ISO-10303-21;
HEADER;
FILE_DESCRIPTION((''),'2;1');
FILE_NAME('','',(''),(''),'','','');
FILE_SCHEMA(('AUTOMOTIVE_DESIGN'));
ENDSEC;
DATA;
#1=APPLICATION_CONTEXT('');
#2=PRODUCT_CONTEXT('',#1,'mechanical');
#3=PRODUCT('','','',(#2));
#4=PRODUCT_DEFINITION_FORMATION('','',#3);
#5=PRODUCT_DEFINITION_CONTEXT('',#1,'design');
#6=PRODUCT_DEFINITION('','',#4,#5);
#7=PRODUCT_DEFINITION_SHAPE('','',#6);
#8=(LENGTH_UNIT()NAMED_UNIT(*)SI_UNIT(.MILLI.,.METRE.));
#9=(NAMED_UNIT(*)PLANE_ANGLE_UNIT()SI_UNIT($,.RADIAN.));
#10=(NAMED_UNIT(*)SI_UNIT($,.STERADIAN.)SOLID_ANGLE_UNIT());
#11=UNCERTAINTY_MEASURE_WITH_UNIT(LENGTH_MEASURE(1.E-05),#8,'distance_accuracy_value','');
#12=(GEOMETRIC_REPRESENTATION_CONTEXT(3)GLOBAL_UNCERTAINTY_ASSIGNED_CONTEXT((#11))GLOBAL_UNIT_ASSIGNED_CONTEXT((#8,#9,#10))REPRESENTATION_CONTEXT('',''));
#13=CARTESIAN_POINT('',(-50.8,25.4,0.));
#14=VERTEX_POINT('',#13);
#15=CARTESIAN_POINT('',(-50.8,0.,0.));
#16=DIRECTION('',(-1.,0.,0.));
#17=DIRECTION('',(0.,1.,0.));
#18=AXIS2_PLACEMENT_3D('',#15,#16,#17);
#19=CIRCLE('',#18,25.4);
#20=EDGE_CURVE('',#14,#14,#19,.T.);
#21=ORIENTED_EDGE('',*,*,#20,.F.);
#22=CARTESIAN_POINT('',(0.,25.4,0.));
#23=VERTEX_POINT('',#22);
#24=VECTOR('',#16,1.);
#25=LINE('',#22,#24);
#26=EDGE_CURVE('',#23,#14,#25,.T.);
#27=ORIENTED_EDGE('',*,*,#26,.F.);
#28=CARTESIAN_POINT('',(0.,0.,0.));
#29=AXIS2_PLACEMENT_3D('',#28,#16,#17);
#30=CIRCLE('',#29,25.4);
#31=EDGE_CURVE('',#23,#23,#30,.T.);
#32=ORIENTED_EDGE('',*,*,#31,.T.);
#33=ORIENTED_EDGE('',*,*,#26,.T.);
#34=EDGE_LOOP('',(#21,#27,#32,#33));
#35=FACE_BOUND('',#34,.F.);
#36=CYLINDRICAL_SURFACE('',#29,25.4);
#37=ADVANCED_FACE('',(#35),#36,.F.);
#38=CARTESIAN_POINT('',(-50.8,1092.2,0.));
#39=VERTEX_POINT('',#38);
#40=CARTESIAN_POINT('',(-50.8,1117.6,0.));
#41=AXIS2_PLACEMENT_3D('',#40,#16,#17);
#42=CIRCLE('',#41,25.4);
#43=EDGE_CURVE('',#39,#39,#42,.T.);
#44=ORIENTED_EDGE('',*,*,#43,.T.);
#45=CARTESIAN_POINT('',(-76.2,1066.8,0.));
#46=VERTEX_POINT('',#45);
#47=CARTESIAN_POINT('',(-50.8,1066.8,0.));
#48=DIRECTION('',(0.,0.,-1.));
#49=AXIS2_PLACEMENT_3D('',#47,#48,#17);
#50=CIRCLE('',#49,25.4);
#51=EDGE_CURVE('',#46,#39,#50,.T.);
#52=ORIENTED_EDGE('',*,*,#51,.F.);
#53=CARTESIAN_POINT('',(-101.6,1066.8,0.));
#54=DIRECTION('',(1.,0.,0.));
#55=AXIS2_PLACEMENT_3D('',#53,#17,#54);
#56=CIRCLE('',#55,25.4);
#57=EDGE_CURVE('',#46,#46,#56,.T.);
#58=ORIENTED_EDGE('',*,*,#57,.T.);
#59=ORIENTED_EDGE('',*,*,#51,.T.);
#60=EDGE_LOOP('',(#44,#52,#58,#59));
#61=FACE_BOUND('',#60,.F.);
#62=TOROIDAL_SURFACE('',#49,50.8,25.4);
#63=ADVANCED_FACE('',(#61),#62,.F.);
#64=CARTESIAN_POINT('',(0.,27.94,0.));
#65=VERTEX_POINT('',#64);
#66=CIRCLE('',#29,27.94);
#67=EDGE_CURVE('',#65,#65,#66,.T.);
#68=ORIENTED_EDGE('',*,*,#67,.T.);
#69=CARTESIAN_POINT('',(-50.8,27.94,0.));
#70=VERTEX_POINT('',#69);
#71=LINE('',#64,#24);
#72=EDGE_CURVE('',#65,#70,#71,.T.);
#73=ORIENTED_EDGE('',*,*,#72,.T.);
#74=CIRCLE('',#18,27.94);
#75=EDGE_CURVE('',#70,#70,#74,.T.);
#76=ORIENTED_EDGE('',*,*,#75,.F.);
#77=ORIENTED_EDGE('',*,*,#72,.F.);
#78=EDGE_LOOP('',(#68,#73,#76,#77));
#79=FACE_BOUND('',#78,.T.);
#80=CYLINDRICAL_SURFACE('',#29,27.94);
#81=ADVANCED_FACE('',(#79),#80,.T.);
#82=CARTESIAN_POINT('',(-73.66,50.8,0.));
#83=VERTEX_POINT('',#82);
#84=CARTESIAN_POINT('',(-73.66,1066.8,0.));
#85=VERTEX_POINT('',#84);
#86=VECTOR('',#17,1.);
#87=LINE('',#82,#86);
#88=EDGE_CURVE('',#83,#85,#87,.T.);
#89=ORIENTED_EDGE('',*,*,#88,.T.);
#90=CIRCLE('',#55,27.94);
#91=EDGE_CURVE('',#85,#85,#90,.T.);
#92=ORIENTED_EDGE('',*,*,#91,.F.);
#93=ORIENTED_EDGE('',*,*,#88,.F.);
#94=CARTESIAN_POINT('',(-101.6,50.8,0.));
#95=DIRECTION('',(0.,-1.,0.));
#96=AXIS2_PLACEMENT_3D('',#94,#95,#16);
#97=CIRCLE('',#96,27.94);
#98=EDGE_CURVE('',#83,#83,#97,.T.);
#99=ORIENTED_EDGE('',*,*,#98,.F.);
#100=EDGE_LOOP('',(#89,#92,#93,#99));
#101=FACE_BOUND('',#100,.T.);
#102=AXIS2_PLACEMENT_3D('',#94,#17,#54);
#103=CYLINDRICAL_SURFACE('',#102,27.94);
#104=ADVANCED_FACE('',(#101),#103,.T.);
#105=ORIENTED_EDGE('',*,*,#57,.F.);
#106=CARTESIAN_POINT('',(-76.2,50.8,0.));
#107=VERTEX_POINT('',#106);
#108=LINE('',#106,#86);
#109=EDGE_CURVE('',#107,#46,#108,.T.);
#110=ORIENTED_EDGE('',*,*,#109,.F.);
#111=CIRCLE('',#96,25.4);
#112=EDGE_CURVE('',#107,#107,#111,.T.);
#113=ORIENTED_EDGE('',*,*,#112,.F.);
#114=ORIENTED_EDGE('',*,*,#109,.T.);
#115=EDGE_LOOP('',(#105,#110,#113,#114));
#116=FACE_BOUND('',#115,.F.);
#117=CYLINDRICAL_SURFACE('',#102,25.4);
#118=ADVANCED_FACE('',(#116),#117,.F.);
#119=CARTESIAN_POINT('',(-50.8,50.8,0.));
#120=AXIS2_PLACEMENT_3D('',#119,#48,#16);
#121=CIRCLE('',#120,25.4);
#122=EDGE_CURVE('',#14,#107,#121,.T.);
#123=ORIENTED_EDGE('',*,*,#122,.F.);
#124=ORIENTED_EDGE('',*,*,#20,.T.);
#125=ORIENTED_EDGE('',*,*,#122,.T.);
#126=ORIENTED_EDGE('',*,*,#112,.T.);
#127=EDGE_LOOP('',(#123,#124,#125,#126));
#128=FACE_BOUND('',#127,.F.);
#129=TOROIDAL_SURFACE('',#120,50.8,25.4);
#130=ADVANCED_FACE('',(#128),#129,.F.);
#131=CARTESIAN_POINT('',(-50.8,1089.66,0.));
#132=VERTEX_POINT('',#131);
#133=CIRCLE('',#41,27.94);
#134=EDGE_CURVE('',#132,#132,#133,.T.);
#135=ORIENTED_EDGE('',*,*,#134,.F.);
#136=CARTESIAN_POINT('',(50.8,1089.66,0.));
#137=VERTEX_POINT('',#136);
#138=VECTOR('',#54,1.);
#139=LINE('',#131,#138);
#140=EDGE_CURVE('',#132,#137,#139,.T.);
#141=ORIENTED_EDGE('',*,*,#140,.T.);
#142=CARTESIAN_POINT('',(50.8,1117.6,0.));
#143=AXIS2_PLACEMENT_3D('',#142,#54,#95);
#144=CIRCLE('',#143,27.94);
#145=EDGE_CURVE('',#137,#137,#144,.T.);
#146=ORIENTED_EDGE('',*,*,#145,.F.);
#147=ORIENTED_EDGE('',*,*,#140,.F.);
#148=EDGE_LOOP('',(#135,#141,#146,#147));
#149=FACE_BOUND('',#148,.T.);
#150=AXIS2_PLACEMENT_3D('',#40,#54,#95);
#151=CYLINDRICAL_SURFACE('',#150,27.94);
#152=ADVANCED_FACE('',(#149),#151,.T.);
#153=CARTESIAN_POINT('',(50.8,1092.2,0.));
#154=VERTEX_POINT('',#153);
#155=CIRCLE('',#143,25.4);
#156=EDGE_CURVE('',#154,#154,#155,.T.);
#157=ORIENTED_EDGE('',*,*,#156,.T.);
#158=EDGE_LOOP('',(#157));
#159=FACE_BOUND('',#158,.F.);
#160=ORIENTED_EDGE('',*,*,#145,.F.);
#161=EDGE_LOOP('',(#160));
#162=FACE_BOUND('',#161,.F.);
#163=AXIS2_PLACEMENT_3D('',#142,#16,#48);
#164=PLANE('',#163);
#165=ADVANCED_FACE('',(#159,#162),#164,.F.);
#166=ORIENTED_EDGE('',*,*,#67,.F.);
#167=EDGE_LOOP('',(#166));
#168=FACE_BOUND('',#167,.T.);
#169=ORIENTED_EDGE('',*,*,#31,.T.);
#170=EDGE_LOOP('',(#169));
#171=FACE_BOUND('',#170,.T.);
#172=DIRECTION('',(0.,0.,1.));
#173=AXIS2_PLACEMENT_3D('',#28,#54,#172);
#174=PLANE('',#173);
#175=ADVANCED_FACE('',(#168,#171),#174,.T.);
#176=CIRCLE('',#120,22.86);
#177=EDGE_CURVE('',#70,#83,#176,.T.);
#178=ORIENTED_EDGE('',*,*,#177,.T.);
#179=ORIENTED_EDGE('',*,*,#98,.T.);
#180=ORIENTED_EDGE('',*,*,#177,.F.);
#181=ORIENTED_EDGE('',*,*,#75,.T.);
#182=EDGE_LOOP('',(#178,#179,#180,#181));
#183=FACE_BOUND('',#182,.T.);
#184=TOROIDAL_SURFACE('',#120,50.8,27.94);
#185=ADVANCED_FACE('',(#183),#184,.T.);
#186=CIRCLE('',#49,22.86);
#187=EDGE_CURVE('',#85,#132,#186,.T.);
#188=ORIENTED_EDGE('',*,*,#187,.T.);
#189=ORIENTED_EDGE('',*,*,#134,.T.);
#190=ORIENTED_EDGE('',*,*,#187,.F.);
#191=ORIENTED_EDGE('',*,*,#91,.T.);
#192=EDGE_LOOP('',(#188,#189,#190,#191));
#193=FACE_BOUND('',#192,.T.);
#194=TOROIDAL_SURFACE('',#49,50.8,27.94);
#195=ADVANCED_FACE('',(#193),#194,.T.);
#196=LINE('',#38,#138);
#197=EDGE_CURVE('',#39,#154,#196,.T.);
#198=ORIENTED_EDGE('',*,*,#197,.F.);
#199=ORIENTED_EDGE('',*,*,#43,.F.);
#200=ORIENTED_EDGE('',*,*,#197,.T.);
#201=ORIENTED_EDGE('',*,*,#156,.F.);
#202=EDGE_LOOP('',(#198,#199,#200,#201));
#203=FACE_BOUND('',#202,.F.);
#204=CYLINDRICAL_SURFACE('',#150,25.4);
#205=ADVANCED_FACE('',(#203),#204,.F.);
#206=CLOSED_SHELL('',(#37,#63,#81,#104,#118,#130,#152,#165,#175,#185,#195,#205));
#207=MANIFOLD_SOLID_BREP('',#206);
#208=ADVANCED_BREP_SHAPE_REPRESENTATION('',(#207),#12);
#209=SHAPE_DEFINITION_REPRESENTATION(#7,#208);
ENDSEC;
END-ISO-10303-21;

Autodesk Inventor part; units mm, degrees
ref_plane "YZ Plane" through (0, 0, 0) normal (1, 0, 0) x (0, 1, 0)
ref_plane "XZ Plane" through (0, 0, 0) normal (0, 1, 0) x (-1, 0, 0)
ref_plane "XY Plane" through (0, 0, 0) normal (0, 0, 1) x (1, 0, 0)
sketch "Sketch2" plane through (0, 0, 0) normal (0, 0, 1) x (1, 0, 0)
  line L0 (0, 0) -> (-50.8, 0)
  line L1 (-101.6, 50.8) -> (-101.6, 1066.8)
  line L2 (-50.8, 1117.6) -> (50.8, 1117.6)
  arc A0 (-50.8, 1117.6) -> (-101.6, 1066.8) centre (-50.8, 1066.8) ccw
  arc A1 (-101.6, 50.8) -> (-50.8, 0) centre (-50.8, 50.8) ccw
  point P0 (0, 1117.6)
  dimension "d1" = 50.8
  dimension "d3" = 1016
  dimension "d6" = 101.6
  dimension "d7" = 101.6
  dimension "d8" = 50.8
  dimension "d9" = 1117.6
  dimension "d10" = 50.8
  dimension "d11" = 50.8
  dimension "d12" = 50.8
sketch "Sketch3" plane through (0, 0, 0) normal (1, 0, 0) x (0, 1, 0)
  circle A0 centre (0, 0) radius 27.94
  dimension "d13" = 55.88
sweep "Sweep1" add profiles "Sketch3" path "Sketch2"
shell "Shell1" thickness 2.54 removed faces 2 at (0, -1.1226, -9.2454) at (50.8, 1125.8465, -0.1295)
properties part number "connector2"
